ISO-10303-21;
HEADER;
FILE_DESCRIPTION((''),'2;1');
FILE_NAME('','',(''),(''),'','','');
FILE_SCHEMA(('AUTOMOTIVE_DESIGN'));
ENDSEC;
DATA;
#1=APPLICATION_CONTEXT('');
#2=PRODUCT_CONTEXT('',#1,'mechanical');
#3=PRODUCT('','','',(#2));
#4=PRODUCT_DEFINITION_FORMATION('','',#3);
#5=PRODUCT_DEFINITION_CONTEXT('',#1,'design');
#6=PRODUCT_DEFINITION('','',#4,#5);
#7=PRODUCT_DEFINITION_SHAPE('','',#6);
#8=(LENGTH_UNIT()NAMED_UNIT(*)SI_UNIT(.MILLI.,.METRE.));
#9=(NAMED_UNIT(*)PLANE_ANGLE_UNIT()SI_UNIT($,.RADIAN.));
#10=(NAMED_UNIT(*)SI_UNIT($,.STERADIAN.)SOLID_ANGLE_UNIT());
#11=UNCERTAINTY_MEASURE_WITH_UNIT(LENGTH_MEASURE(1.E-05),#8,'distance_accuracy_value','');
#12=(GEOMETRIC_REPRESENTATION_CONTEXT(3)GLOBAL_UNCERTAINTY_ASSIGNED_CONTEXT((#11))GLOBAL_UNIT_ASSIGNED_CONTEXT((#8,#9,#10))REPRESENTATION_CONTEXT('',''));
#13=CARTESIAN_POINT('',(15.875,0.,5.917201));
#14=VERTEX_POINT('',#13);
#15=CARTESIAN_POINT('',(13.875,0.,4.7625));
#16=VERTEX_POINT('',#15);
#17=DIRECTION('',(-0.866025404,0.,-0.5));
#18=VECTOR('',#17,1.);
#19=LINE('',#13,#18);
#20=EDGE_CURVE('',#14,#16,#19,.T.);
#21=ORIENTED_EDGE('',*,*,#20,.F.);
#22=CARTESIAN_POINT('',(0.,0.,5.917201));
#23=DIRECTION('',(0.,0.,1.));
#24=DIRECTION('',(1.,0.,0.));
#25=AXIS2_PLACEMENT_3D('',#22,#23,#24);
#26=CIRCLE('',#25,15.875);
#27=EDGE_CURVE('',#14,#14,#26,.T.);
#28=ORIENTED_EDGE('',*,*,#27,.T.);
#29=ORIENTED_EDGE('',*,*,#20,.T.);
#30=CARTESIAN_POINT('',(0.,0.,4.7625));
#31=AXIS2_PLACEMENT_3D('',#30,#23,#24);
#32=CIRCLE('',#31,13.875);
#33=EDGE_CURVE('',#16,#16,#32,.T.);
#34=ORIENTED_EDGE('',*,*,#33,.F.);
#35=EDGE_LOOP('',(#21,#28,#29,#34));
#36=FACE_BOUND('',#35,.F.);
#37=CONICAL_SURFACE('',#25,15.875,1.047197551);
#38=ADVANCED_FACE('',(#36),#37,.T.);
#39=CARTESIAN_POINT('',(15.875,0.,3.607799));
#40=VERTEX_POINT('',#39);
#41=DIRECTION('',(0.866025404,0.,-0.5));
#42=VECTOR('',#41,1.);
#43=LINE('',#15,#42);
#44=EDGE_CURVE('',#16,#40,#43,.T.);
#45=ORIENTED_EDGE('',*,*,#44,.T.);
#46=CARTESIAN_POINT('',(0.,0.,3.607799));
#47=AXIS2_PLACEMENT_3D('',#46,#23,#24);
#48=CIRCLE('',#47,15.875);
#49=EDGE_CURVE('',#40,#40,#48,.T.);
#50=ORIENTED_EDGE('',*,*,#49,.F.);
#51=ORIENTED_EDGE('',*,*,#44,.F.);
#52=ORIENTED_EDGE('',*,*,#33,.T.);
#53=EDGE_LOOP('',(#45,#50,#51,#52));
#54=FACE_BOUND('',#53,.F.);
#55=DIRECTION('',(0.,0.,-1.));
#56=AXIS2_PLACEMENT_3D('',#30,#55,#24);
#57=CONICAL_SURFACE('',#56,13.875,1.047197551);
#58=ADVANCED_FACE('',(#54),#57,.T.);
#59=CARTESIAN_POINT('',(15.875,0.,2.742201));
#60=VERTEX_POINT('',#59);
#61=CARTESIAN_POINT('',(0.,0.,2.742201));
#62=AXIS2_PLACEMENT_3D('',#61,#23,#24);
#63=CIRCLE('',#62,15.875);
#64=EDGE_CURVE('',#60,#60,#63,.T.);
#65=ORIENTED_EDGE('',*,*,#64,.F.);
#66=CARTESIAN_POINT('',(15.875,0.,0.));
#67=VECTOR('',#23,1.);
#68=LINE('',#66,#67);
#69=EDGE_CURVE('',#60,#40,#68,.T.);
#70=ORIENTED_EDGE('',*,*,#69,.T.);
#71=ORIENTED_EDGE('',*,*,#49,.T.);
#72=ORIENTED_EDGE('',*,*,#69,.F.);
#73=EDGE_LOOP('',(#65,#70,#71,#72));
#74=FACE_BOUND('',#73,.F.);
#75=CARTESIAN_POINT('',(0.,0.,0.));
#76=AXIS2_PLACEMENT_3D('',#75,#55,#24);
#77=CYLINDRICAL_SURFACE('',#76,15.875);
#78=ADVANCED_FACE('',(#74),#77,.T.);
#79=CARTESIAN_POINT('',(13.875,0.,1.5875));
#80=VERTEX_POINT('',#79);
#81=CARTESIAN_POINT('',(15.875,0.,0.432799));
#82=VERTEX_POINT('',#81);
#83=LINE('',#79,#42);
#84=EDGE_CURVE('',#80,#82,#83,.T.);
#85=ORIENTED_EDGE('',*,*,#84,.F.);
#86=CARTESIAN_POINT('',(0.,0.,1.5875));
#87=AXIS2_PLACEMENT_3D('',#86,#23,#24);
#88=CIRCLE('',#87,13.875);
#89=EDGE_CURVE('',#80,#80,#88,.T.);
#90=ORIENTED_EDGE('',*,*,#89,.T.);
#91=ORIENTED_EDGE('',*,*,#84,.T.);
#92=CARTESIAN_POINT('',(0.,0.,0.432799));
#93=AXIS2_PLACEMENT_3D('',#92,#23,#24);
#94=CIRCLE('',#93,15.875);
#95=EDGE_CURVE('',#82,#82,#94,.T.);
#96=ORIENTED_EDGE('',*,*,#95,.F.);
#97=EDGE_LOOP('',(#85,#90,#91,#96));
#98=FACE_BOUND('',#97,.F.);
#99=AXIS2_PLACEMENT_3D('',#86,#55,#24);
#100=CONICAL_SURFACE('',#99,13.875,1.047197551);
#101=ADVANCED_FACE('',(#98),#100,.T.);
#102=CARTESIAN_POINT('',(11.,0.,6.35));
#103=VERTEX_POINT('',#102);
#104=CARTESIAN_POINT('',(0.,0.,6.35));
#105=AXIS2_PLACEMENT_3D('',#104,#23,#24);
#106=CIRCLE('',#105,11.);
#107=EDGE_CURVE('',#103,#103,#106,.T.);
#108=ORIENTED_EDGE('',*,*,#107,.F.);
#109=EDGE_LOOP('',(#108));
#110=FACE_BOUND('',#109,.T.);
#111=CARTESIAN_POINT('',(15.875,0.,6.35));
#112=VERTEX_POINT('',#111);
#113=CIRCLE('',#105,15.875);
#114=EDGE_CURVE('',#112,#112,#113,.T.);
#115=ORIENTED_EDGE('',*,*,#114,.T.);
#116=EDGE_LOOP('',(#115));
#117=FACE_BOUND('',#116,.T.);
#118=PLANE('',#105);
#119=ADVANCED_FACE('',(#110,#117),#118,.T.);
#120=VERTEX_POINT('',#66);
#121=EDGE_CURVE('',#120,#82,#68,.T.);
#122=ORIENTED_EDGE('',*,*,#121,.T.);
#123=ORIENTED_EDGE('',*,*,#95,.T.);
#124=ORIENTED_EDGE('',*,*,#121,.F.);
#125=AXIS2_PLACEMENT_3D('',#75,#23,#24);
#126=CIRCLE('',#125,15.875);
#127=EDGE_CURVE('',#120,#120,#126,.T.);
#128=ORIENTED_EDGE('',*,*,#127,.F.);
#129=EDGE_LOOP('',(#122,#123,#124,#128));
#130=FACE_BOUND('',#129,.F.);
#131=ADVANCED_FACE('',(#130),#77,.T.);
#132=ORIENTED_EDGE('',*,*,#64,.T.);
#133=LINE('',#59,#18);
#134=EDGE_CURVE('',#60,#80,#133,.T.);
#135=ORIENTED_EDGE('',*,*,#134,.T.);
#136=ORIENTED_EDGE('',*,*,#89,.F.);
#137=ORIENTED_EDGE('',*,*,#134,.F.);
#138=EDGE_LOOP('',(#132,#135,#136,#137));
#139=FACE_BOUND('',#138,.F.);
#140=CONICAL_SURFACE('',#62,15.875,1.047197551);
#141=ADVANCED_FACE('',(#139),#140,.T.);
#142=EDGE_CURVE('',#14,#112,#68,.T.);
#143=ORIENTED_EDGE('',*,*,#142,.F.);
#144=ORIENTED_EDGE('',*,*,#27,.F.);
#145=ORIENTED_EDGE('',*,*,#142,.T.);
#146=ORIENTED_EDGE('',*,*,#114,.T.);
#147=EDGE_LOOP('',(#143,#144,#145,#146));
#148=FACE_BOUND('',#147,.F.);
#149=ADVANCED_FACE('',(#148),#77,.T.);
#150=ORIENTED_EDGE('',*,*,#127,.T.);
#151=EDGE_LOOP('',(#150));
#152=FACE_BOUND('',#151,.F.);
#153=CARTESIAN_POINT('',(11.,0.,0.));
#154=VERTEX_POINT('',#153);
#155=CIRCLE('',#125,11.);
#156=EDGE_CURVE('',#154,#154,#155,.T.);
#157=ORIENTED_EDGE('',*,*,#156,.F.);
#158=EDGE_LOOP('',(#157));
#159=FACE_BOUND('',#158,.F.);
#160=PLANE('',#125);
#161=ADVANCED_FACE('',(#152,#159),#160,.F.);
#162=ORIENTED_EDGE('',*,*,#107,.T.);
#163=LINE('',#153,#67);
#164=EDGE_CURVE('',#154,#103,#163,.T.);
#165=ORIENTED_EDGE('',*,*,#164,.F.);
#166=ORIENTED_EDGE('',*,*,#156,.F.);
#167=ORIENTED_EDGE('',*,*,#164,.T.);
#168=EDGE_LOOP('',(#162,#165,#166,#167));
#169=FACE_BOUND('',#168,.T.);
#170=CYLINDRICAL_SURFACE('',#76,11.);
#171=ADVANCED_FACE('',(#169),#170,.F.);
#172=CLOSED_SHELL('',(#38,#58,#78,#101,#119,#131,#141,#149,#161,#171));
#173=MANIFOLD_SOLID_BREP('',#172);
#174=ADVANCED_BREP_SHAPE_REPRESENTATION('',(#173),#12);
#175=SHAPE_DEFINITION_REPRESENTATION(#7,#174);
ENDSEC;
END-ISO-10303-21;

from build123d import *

# Parameters (mm, degrees)
F0_R     = 15.875
F0_R_2   = 11
F1_DEPTH = 6.35


# Not quite as in the source:
# - a length typed as a fraction of an inch, garbled in the dataset ("3 / 203.2 mm" for 3/8 in), is restored


with BuildPart() as f1:
    # F0 (on Top) → F1 (new body)
    with BuildSketch(Plane.XY):
        Circle(F0_R)
        Circle(F0_R_2, mode=Mode.SUBTRACT)
    extrude(amount=F1_DEPTH)

    # F2 (on Front) → F3 (revolve, cut)
    with BuildSketch(Plane.XZ):
        Polygon((15.875, 0.4327994616), (15.875, 2.7422005384), (13.875, 1.5875), align=None)
        Polygon((15.875, 5.9172005384), (13.875, 4.7625), (15.875, 3.6077994616), align=None)
    revolve(axis=Axis((0, 0, 9.5765832812), (0, 0, 1)), mode=Mode.SUBTRACT)


solid = f1.part
